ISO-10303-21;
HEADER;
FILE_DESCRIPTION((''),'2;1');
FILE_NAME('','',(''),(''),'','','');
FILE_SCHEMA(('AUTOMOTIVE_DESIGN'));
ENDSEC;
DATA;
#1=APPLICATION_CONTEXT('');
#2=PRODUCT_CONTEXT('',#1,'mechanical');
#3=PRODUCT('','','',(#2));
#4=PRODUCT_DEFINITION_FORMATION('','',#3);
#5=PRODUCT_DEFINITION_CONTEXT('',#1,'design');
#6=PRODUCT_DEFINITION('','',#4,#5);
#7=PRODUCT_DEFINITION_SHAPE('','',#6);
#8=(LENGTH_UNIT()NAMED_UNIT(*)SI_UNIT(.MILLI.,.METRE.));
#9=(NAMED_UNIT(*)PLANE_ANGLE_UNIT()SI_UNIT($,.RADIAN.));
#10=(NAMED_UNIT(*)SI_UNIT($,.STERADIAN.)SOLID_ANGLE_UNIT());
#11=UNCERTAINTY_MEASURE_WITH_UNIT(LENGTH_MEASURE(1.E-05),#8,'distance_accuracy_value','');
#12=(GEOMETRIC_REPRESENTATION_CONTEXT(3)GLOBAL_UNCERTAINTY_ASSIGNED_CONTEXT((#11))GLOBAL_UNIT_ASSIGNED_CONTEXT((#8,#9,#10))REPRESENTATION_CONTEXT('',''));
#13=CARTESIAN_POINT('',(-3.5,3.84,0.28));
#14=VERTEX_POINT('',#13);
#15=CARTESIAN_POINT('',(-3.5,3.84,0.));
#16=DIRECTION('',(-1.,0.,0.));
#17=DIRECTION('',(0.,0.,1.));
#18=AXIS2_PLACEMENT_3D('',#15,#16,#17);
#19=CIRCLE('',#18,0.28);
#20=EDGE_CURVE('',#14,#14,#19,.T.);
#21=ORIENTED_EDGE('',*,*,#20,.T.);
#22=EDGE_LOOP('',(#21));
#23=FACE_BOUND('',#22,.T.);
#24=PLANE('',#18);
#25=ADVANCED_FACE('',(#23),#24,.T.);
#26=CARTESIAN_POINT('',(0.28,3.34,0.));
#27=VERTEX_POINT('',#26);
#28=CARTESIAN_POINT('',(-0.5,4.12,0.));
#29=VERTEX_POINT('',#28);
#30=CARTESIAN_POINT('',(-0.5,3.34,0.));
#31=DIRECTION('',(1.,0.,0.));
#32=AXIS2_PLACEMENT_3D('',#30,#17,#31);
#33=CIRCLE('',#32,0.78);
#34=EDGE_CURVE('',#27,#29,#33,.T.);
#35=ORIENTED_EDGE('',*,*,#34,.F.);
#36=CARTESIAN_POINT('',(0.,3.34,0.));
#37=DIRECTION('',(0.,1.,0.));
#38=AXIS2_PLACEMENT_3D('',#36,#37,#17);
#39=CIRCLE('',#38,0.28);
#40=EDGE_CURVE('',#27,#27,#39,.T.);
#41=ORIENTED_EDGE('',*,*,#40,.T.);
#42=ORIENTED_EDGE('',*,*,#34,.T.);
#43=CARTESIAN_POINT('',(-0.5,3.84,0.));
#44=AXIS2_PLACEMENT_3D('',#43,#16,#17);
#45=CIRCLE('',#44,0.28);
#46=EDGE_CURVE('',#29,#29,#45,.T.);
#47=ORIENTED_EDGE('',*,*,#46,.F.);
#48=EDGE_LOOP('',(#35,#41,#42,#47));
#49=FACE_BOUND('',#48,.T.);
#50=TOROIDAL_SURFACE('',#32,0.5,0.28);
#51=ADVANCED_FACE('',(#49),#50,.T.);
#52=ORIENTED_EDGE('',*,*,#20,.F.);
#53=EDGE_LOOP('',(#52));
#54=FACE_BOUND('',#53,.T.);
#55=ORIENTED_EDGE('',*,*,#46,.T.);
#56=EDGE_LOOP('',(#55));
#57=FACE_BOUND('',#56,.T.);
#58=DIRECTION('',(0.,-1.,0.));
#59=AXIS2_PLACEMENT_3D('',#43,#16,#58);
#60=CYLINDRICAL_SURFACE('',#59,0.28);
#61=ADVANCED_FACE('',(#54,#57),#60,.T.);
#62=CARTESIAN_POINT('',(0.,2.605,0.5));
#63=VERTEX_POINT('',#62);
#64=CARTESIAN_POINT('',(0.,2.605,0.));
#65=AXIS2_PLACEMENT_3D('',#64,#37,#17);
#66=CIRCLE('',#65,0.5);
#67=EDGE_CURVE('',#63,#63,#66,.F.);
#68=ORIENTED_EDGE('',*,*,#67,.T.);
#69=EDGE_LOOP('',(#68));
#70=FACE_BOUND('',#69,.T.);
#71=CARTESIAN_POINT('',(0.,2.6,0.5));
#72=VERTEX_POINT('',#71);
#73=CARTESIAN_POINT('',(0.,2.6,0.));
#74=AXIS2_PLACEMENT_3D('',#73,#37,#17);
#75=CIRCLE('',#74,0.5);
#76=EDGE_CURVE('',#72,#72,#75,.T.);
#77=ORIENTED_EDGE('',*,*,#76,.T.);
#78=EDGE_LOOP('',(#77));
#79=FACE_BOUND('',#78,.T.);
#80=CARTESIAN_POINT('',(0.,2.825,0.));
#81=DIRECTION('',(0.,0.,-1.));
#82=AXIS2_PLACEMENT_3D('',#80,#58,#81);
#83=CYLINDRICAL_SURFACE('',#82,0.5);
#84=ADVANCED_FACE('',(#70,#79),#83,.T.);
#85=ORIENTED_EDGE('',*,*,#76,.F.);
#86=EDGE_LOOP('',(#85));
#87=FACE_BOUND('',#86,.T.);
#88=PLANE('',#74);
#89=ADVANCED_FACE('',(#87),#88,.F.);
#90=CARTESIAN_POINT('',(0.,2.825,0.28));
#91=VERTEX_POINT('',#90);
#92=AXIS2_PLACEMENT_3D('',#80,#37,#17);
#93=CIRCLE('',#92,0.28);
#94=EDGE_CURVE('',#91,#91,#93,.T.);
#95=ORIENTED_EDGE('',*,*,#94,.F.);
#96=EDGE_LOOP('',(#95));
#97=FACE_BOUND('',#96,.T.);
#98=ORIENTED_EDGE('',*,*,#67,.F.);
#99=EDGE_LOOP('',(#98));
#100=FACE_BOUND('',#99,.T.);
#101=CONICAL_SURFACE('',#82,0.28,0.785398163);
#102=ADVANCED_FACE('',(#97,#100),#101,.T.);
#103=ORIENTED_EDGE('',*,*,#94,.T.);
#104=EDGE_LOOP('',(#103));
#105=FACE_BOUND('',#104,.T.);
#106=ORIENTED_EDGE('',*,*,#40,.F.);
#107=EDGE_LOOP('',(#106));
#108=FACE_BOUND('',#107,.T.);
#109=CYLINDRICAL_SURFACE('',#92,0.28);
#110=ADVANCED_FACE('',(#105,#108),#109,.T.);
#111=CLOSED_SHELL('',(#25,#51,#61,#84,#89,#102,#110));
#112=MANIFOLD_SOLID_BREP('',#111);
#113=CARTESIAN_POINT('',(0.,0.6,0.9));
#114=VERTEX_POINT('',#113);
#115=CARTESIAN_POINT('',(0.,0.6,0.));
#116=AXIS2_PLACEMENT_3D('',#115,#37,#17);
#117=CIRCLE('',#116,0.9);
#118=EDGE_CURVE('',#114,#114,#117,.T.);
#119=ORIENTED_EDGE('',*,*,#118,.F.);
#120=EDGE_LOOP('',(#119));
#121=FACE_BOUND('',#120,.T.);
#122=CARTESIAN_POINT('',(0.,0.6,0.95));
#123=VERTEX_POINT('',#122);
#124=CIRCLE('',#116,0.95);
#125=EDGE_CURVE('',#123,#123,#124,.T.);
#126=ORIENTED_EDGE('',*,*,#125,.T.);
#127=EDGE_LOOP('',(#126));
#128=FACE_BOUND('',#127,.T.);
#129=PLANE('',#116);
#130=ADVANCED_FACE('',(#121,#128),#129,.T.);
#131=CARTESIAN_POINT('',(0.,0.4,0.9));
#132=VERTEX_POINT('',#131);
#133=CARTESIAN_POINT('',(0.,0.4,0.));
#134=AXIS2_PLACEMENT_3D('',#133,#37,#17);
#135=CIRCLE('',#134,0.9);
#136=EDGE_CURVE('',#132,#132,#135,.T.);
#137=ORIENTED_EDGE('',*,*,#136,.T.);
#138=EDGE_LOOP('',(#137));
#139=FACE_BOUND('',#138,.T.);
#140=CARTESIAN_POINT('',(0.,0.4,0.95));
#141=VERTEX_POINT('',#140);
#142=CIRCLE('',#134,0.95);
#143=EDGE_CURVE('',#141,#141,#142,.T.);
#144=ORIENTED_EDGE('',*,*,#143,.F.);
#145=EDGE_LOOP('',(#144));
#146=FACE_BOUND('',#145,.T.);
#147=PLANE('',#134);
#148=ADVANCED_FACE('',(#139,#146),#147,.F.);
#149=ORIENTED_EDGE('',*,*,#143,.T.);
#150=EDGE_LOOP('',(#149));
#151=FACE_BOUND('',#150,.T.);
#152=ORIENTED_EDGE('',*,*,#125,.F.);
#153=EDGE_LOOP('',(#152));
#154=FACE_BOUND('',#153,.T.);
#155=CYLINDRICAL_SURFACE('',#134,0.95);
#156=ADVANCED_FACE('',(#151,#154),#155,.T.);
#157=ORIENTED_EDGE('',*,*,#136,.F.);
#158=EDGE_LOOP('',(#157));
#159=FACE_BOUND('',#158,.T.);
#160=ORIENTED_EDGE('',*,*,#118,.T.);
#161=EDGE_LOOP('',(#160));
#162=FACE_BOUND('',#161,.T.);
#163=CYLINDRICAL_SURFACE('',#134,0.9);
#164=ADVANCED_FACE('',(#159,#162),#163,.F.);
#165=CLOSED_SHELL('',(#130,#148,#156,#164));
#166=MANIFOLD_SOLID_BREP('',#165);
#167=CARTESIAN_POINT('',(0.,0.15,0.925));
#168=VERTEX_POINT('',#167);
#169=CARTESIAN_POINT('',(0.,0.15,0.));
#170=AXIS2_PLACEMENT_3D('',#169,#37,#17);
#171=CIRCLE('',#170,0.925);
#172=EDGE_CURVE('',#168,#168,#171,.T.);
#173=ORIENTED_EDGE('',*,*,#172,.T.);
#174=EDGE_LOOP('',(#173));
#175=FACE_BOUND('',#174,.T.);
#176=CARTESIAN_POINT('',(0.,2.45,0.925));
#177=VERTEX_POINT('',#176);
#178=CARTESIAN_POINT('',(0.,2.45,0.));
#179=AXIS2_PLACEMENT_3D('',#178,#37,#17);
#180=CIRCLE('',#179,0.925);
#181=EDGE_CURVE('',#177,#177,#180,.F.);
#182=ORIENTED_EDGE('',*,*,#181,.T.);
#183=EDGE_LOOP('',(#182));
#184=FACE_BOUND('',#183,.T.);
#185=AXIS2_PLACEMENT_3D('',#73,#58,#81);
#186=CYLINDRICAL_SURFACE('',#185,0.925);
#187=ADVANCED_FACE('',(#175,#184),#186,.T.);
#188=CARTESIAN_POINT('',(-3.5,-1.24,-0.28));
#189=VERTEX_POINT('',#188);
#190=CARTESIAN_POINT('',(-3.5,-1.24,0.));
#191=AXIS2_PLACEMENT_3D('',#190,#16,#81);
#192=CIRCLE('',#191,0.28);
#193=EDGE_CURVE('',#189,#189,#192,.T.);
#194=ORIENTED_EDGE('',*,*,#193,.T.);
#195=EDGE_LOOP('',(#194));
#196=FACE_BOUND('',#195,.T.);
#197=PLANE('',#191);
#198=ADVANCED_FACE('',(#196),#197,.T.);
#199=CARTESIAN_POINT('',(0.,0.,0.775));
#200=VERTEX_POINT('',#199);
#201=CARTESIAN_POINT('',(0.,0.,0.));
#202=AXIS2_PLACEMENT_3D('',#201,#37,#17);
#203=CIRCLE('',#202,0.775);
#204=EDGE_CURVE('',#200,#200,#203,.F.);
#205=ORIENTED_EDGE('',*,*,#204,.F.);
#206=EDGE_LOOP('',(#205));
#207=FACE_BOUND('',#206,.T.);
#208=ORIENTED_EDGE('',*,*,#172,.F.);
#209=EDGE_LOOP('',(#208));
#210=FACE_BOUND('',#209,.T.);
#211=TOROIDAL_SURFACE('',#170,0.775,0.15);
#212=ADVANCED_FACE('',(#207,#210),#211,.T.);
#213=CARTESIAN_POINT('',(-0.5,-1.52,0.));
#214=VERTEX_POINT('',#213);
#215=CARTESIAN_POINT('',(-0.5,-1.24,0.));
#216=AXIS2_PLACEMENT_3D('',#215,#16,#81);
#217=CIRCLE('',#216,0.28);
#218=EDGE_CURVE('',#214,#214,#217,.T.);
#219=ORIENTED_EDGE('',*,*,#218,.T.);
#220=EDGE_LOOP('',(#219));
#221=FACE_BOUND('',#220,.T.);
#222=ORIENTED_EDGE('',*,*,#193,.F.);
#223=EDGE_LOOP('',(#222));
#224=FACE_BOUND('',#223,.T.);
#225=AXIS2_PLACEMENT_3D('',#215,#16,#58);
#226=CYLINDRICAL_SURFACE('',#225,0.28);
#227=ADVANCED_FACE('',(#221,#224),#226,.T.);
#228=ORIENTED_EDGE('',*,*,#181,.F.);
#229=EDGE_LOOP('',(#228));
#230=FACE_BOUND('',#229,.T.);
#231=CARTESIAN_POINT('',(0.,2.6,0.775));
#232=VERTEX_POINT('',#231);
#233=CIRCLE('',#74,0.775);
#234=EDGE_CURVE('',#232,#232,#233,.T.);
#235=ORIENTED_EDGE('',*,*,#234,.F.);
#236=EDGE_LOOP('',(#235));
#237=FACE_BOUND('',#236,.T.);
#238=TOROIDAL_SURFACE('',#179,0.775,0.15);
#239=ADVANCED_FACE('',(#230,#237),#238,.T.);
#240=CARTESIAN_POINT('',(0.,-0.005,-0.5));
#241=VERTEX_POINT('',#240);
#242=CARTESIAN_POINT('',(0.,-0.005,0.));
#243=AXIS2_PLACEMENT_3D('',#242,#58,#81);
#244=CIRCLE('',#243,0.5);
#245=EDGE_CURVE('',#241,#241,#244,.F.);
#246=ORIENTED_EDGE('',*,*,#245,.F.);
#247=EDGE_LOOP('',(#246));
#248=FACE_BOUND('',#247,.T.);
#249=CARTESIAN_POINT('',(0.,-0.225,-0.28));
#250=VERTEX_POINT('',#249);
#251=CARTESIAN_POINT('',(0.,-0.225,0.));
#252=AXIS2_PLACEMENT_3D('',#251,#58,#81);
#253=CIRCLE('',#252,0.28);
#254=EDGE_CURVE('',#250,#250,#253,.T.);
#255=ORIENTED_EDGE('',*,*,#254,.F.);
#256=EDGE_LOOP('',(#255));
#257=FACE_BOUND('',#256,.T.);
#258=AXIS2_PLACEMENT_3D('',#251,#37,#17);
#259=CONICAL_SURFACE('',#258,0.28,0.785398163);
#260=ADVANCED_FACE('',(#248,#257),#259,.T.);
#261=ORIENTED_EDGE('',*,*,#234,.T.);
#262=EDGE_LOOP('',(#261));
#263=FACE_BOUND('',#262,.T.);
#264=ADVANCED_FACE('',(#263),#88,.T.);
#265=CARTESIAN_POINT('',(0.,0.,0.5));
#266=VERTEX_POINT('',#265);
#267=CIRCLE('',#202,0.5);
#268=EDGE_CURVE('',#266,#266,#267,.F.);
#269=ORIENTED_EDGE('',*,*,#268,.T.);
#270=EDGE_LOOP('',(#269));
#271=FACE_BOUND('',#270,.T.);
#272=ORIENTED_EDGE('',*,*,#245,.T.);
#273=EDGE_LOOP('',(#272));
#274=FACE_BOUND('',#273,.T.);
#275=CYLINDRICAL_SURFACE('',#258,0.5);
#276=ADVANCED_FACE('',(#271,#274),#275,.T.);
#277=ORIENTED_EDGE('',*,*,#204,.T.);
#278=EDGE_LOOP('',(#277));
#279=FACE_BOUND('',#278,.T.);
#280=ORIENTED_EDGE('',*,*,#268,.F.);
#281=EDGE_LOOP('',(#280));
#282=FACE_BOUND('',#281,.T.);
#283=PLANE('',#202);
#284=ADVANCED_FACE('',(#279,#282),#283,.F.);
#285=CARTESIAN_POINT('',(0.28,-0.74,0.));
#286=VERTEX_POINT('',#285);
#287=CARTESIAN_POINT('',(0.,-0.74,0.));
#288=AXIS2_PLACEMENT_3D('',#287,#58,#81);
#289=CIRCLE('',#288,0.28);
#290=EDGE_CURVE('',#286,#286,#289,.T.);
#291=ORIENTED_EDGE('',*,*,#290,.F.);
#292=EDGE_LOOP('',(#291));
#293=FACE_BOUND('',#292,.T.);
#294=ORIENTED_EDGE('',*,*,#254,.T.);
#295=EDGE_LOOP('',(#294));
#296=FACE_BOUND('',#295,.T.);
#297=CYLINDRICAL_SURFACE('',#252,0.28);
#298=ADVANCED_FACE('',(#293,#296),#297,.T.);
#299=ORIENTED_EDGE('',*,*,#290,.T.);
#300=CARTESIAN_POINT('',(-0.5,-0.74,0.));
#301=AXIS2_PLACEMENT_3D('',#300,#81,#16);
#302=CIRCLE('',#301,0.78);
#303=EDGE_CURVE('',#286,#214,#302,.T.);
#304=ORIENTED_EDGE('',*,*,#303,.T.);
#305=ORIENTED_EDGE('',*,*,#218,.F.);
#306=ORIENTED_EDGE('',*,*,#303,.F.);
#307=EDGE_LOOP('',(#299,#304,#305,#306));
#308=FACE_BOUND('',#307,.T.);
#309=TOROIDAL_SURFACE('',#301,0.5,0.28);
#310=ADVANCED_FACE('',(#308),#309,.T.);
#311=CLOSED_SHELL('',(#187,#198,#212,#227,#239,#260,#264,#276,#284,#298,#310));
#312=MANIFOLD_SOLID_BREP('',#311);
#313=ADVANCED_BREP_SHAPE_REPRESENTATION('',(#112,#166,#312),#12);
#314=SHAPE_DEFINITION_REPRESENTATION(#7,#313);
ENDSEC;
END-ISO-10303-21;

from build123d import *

# Parameters (mm, degrees)
SKETCH1_R               = 0.925
BOSS_EXTRUDE1_DEPTH     = 2.6
SKETCH2_R               = 0.5
BOSS_EXTRUDE2_DEPTH     = 0.225
CHAMFER2_SIZE           = 0.22
FILLET1_R               = 0.15
FILLET2_R               = 0.15
SKETCH10_R              = 0.95
SKETCH10_R_2            = 0.9
BOSS_EXTRUDE9_DEPTH     = 0.2
BARRER2_OUTLINE_R       = 0.28
BARRER2_ANGLE           = 90
BARRER2_START           = 2.825
BARRER2_2_OUTLINE_R     = 0.28
BARRER2_2_DEPTH         = 0.5150001
BARRER2_START_2         = -3.5
BARRER2_3_OUTLINE_R     = 0.28
BARRER2_3_DEPTH         = 3.0000001
CROQUIS7_R              = 0.5
SALIENTE_EXTRUIR1_DEPTH = 0.225
CHAFL_N1_SIZE           = 0.22
BARRER3_OUTLINE_R       = 0.28
BARRER3_ANGLE           = 90
BARRER3_START           = -0.7400001
BARRER3_2_OUTLINE_R     = 0.28
BARRER3_2_DEPTH         = 1.7400001
BARRER3_START_2         = -3.5
BARRER3_3_OUTLINE_R     = 0.28
BARRER3_3_DEPTH         = 3.0000001


with BuildPart() as part:
    # Sketch1 → Boss-Extrude1 (new body)
    with BuildSketch(Plane(origin=(0, 0, 0), x_dir=(1, 0, 0), z_dir=(0, 1, 0))):
        with Locations(Location((0, 0, 0), (0, 0, 270))):
            Circle(SKETCH1_R)
    extrude(amount=BOSS_EXTRUDE1_DEPTH)

    # Fillet1
    fillet1_edges = [part.edges().sort_by_distance(p)[0] for p in [
        (0, 2.6, -0.925),
    ]]
    fillet(fillet1_edges, radius=FILLET1_R)

    # Fillet2
    fillet2_edges = [part.edges().sort_by_distance(p)[0] for p in [
        (0, 0, -0.925),
    ]]
    fillet(fillet2_edges, radius=FILLET2_R)

    # Croquis7 → Saliente-Extruir1 (add)
    with BuildSketch(Plane.XZ):
        with Locations(Location((0, 0, 0), (0, 0, 90))):
            Circle(CROQUIS7_R)
    extrude(amount=SALIENTE_EXTRUIR1_DEPTH)

    # Chaflán1
    chafl_n1_edges = [part.edges().sort_by_distance(p)[0] for p in [
        (0, -0.225, -0.5),
    ]]
    chamfer(chafl_n1_edges, length=CHAFL_N1_SIZE)

    # Barrer3: read off the stored shape, not the designer's step
    # Barrer3 outline → Barrer3 (revolve)
    with BuildSketch(Plane(origin=(-0.5, -0.74, 0), x_dir=(0, -1, 0), z_dir=(-1, 0, 0))):
        with Locations((0.5, 0)):
            Circle(BARRER3_OUTLINE_R)
    revolve(axis=Axis((-0.5, -0.74, 0), (0, 0, 1)), revolution_arc=BARRER3_ANGLE)

    # Barrer3 2 outline → Barrer3 2 (add)
    with BuildSketch(Plane(origin=(0, 0, 0), x_dir=(1, 0, 0), z_dir=(0, 1, 0)).offset(BARRER3_START)):
        Circle(BARRER3_2_OUTLINE_R)
    extrude(amount=BARRER3_2_DEPTH)

    # Barrer3 3 outline → Barrer3 3 (add)
    with BuildSketch(Plane.YZ.offset(BARRER3_START_2)):
        with Locations((-1.24, 0)):
            Circle(BARRER3_3_OUTLINE_R)
    extrude(amount=BARRER3_3_DEPTH)


with BuildPart() as body_2:
    # Sketch2 → Boss-Extrude2 (new body)
    with BuildSketch(Plane(origin=(0, 2.6, 0), x_dir=(1, 0, 0), z_dir=(0, 1, 0))):
        with Locations(Location((0, 0, 0), (0, 0, 270))):
            Circle(SKETCH2_R)
    extrude(amount=BOSS_EXTRUDE2_DEPTH)

    # Chamfer2
    chamfer2_edges = [body_2.edges().sort_by_distance(p)[0] for p in [
        (0, 2.825, -0.5),
    ]]
    chamfer(chamfer2_edges, length=CHAMFER2_SIZE)

    # Barrer2: read off the stored shape, not the designer's step
    # Barrer2 outline → Barrer2 (revolve)
    with BuildSketch(Plane(origin=(-0.5, 3.34, 0), x_dir=(1, 0, 0), z_dir=(0, -1, 0))):
        with Locations((0.5, 0)):
            Circle(BARRER2_OUTLINE_R)
    revolve(axis=Axis((-0.5, 3.34, 0), (0, 0, 1)), revolution_arc=BARRER2_ANGLE)

    # Barrer2 2 outline → Barrer2 2 (add)
    with BuildSketch(Plane(origin=(0, 0, 0), x_dir=(1, 0, 0), z_dir=(0, 1, 0)).offset(BARRER2_START)):
        Circle(BARRER2_2_OUTLINE_R)
    extrude(amount=BARRER2_2_DEPTH)

    # Barrer2 3 outline → Barrer2 3 (add)
    with BuildSketch(Plane.YZ.offset(BARRER2_START_2)):
        with Locations((3.84, 0)):
            Circle(BARRER2_3_OUTLINE_R)
    extrude(amount=BARRER2_3_DEPTH)


with BuildPart() as body_3:
    # Sketch10 → Boss-Extrude9 (new body)
    with BuildSketch(Plane(origin=(0, 0.6, 0), x_dir=(-1, 0, 0), z_dir=(0, 1, 0))):
        with Locations(Location((0, 0, 0), (0, 0, 90))):
            Circle(SKETCH10_R)
        with Locations(Location((0, 0, 0), (0, 0, 90))):
            Circle(SKETCH10_R_2, mode=Mode.SUBTRACT)
    extrude(amount=-BOSS_EXTRUDE9_DEPTH)


solid = Compound([part.part, body_2.part, body_3.part])
